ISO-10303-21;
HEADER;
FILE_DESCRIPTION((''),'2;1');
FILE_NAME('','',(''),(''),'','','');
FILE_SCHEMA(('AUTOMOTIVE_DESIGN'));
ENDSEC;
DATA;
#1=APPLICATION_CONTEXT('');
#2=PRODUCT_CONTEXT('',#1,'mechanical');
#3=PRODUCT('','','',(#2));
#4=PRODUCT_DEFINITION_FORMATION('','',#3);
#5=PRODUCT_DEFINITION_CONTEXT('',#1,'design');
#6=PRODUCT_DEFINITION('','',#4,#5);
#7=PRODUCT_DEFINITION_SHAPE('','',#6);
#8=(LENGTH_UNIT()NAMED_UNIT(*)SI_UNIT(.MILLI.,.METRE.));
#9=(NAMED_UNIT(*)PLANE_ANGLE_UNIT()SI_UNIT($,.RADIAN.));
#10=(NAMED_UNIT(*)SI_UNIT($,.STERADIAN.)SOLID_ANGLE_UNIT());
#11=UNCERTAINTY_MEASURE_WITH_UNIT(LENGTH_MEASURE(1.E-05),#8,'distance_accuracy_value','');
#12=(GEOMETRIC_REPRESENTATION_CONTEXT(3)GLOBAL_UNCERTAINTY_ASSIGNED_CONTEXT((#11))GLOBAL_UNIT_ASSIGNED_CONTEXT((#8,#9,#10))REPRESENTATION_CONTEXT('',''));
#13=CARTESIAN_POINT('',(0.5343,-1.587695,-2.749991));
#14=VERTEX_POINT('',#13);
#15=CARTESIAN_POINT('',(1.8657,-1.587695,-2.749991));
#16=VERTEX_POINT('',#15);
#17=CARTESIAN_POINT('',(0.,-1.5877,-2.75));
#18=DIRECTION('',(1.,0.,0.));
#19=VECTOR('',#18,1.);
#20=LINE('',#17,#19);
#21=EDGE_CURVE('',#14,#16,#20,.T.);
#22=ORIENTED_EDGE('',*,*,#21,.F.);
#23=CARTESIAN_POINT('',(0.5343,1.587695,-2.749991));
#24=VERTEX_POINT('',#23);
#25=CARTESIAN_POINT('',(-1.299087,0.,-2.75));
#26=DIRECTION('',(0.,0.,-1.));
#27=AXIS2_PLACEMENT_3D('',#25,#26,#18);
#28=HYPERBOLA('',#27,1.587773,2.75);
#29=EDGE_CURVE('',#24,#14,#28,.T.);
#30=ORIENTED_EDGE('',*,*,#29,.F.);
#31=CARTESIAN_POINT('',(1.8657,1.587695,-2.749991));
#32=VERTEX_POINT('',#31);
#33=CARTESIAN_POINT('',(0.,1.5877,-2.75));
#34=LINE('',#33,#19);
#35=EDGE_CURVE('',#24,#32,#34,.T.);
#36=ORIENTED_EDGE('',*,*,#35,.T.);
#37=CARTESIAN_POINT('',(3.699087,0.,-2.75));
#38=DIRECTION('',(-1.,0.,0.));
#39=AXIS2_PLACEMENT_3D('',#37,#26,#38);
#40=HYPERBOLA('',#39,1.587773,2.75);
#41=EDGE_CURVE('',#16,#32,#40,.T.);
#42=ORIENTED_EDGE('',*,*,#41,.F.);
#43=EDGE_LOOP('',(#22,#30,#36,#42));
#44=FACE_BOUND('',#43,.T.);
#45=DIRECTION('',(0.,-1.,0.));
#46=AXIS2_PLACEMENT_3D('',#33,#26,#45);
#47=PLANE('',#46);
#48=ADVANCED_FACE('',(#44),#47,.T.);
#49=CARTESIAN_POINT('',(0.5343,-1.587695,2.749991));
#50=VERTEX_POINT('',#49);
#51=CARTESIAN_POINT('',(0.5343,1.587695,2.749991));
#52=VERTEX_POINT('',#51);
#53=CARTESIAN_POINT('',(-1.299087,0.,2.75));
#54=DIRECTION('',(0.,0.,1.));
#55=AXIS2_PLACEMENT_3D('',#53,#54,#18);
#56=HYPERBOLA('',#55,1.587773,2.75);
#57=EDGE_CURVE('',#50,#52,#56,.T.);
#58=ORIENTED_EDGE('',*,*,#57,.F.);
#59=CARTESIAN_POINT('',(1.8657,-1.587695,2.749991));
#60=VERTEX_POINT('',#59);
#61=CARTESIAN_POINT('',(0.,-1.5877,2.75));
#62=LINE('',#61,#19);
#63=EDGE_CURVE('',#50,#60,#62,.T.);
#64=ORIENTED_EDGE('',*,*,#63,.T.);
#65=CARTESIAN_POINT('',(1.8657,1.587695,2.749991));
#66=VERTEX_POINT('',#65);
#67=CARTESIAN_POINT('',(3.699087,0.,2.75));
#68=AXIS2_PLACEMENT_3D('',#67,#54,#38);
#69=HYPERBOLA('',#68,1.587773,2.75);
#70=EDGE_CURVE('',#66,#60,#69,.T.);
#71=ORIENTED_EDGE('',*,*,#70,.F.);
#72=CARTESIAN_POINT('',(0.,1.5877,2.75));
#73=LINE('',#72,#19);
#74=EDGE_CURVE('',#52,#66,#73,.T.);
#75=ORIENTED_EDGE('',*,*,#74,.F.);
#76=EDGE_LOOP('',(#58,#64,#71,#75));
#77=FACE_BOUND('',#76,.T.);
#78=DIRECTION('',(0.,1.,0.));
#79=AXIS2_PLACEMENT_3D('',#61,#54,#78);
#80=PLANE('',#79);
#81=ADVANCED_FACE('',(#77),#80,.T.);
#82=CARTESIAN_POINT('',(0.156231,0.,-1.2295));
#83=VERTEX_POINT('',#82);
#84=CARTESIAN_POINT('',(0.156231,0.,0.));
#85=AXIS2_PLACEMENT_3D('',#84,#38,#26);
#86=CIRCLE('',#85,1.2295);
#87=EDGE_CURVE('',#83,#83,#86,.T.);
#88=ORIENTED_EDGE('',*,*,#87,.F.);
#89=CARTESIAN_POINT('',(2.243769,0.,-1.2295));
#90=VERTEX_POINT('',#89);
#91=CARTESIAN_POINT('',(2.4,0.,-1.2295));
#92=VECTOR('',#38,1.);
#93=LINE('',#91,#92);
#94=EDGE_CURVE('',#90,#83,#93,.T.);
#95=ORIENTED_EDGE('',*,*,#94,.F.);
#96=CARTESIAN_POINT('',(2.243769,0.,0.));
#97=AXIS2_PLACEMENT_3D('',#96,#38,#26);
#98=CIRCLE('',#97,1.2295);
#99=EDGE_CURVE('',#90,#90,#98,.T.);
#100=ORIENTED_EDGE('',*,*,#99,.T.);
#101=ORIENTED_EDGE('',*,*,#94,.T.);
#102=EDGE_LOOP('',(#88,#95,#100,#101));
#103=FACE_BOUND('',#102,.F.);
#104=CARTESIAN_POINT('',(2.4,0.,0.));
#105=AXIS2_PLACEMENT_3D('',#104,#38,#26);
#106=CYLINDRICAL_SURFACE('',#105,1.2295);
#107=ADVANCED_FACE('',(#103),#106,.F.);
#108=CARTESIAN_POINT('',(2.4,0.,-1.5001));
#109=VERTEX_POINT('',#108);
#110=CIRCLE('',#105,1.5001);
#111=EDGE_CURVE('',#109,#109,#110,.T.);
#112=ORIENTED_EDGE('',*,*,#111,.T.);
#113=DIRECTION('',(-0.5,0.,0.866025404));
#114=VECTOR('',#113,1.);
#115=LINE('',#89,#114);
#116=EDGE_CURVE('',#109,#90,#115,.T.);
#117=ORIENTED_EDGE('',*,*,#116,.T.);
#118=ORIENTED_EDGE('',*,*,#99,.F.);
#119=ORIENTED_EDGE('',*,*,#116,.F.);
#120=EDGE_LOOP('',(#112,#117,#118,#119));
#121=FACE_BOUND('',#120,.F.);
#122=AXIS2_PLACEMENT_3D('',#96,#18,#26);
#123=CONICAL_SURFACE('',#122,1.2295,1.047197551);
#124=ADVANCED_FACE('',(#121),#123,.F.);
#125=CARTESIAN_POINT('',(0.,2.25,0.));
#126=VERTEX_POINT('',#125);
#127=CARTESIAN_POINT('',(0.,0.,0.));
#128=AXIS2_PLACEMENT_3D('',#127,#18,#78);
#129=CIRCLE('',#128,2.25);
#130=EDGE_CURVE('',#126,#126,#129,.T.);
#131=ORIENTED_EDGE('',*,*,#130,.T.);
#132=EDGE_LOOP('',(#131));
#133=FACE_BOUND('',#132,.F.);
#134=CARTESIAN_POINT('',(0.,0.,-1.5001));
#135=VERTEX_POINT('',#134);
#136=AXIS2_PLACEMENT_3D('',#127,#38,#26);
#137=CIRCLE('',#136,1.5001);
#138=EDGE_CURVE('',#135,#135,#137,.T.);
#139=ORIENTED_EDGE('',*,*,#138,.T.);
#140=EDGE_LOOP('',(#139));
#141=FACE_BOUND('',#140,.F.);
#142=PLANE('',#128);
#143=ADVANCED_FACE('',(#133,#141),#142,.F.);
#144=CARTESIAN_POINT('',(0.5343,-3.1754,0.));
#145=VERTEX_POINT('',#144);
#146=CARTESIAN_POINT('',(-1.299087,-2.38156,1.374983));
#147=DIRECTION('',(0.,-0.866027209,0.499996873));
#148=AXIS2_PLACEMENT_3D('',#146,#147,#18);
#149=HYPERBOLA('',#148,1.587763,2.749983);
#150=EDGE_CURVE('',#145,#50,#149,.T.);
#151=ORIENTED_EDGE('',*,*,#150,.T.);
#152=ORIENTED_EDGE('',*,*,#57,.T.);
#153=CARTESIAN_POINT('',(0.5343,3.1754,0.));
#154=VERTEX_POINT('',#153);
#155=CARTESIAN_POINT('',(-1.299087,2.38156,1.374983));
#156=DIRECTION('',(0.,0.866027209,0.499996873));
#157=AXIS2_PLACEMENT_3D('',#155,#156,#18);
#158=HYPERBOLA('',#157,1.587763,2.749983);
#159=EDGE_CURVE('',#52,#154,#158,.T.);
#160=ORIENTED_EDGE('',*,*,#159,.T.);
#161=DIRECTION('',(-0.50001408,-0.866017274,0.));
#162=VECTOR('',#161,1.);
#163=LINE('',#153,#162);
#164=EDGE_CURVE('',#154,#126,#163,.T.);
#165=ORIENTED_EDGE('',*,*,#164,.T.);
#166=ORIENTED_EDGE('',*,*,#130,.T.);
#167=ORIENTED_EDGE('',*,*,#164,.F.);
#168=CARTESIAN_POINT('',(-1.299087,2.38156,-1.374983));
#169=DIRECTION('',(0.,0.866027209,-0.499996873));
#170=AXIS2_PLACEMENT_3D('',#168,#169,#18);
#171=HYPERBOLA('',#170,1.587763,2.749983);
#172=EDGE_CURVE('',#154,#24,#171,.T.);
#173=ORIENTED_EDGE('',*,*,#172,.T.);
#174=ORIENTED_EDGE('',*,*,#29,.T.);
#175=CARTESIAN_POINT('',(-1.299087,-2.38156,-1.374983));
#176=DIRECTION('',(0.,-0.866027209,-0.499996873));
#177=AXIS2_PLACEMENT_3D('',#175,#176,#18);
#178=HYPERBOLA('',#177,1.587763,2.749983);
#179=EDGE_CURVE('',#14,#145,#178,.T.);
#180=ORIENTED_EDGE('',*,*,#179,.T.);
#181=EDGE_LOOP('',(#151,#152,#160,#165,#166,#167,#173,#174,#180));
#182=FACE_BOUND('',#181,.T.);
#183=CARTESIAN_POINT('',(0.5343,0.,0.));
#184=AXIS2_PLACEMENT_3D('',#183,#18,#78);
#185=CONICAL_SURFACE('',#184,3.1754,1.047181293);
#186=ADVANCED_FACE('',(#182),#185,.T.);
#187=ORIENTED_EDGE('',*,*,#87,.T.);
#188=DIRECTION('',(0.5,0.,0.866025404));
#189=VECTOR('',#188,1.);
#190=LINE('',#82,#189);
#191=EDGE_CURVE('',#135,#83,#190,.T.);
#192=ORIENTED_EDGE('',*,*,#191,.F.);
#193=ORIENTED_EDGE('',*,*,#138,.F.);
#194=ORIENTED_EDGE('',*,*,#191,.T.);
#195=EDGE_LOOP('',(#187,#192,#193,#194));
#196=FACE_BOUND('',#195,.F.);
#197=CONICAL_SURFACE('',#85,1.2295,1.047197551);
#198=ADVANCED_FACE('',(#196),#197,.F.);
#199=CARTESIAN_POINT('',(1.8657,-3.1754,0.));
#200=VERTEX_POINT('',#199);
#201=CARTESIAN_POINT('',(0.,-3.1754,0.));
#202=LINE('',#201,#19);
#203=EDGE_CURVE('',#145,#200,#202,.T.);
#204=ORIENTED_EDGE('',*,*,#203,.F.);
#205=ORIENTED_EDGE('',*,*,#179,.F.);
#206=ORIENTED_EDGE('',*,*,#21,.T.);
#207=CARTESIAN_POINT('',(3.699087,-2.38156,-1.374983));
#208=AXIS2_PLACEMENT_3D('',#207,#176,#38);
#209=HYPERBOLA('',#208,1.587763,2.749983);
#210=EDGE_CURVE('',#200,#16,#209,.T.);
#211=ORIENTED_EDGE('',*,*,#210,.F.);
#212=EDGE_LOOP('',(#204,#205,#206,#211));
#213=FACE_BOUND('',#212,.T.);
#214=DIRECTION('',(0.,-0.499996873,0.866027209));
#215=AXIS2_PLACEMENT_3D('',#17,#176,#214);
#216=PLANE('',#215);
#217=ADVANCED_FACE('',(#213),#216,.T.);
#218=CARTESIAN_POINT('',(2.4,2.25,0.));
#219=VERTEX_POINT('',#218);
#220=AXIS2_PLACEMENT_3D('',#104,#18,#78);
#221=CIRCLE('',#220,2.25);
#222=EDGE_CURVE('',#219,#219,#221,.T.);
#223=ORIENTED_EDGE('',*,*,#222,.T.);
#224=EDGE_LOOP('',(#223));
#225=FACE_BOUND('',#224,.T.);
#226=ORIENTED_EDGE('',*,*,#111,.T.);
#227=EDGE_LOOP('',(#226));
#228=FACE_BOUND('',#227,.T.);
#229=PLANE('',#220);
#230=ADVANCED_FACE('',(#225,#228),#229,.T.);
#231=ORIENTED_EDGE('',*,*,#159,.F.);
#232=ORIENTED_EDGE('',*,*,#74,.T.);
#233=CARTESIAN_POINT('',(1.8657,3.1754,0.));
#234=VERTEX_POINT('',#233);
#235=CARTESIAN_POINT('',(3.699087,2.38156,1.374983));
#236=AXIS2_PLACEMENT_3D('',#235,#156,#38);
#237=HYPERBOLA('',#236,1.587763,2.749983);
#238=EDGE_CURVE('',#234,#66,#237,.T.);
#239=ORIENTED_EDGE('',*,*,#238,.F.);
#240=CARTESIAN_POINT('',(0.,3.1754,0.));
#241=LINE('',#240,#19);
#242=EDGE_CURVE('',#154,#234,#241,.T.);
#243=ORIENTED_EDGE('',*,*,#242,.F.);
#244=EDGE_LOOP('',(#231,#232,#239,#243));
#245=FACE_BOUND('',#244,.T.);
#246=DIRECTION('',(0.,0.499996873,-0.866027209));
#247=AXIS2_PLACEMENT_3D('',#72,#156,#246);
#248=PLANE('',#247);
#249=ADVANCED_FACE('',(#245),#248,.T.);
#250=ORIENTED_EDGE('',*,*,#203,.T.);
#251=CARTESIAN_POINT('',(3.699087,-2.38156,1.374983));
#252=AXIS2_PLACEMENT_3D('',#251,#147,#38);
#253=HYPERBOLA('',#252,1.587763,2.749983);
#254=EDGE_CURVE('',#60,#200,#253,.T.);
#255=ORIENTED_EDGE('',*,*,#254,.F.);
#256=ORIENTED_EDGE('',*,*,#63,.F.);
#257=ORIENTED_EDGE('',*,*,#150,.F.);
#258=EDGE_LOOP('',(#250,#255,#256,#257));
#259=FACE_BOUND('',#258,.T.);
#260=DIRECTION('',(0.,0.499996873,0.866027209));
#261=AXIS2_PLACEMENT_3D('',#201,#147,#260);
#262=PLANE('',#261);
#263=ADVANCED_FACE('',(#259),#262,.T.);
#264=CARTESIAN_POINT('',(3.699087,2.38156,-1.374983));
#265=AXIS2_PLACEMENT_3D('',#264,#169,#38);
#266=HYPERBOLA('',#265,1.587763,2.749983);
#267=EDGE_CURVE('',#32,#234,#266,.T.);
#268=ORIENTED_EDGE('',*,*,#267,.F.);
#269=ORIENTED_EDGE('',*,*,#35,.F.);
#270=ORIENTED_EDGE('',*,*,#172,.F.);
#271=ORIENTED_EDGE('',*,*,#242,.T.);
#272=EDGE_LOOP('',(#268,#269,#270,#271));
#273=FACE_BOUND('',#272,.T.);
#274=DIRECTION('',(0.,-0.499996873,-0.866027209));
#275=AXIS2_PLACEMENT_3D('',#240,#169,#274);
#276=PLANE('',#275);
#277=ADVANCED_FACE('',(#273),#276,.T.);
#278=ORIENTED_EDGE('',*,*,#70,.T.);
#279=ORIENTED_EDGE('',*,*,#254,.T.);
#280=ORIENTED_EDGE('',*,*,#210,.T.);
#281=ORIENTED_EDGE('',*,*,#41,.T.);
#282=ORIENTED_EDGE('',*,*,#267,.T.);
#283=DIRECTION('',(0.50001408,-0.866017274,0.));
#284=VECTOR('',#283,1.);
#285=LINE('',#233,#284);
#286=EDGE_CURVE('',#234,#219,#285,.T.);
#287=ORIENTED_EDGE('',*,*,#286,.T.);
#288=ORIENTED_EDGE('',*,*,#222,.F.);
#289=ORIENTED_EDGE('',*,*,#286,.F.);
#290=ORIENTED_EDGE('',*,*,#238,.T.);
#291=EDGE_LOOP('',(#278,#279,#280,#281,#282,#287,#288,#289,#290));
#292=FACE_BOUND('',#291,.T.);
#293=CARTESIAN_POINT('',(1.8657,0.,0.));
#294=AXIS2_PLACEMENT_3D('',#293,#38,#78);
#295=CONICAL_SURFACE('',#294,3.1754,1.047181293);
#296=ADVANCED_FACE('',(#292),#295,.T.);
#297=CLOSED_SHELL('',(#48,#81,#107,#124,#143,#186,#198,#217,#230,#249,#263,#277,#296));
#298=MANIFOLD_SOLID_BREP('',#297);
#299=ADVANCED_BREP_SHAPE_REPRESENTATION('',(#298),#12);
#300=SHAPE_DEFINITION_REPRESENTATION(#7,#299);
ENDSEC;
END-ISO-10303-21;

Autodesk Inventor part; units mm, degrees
ref_plane "YZ Plane" through (0, 0, 0) normal (1, 0, 0) x (0, 1, 0)
ref_plane "XZ Plane" through (0, 0, 0) normal (0, 1, 0) x (-1, 0, 0)
sketch "Sketch1" plane through (0, 0, 0) normal (1, 0, 0) x (0, 1, 0)
  line L0 (-3.1754, 0) -> (-1.5877, 2.75)
  line L1 (-1.5877, 2.75) -> (1.5877, 2.75)
  line L2 (1.5877, 2.75) -> (3.1754, 0)
  line L3 (3.1754, 0) -> (1.5877, -2.75)
  line L4 (1.5877, -2.75) -> (-1.5877, -2.75)
  line L5 (-1.5877, -2.75) -> (-3.1754, 0)
  point P0 (0, 0)
  point P1 (0, 0)
  dimension "d0" = 6.3509
extrude "Body" add sketch "Sketch1" along normal blind 2.4
sketch "Sketch2" plane through (0, 0, 0) normal (0, 0, 1) x (1, 0, 0)
  line L0 (0, 1.5877) -> (0, 3.1754) projected
  line L1 (0, 3.1754) -> (2.4, 3.1754) projected
  line L2 (2.4, 1.5877) -> (2.4, 3.1754) projected
  line L3 (-0.48, 0) -> (2.88, 0) projected
  line L4 (0.5343, 3.1754) -> (0, 2.25)
  line L5 (1.8657, 3.1754) -> (2.4, 2.25)
  dimension "d3" = 30
  dimension "d4" = 30
  dimension "d5" = 4.5
  dimension "d6" = 4.5
revolve "Chamfer1" cut sketch "Sketch2" angle 360 about axis through (-10, 0, 0) along (1, 0, 0)
sketch "Sketch3" plane through (2.4, 0, 0) normal (1, 0, 0) x (0, 0, -1)
  arc A0 (-0.625, -1.0825) -> (0.625, -1.0825) centre (0, 0) ccw projected
hole "Thread" at (2.4, 0, 0) direction (-1, 0, 0) diameter 2.459 end through all thread size "M3x0.5" class "6H" standard "ISO Metric profile"
chamfer "Chamfer2" distance 0.2706 angle 30 1 edges at (2.4, 0, 1.2295) measured on face at (2.4, 1.8851, -0.2289)
chamfer "Chamfer3" distance 0.2706 angle 30 1 edges at (0, 0, 1.2295) measured on face at (0, 1.8851, -0.2289)
ref_plane "Work Plane1" through (-6.3375, 0, 0) normal (0, -0.8660254, -0.5) x (1, 0, 0)
equation "\"d0\" = 1.1547 * SW"
equation "\"d1\" = KOH"
equation "\"d3\" = ANG1"
equation "\"d4\" = ANG2"
equation "\"d5\" = SW0"
equation "\"d6\" = SW01"
equation "\"d8\" = -0.5 * GD1 + 0.5 * NND"
equation "\"d40\" = -0.5 * GD1 + 0.5 * NND"
equation "\"d10\" = -0.5 * GD1 + 0.5 * NND"
equation "\"d41\" = -0.5 * GD1 + 0.5 * NND"
equation "\"ANG1\" = 30deg"
equation "\"ANG2\" = 30deg"
equation "\"NND\" = 3"
equation "\"KOH\" = 2.4"
equation "\"SW\" = 5.5"
equation "\"SW0\" = SW01"
equation "\"SW01\" = 4.5"
equation "\"GUL\" = 0.541266 * PTC"
equation "\"THREADDIA\" = 3"
equation "\"TOA\" = 30deg"
equation "\"PTC\" = 0.5"
equation "\"E0\" = 1.155 * SW"
equation "\"GAL\" = 0.541266 * PTC"
equation "\"GD1\" = 2.458734"
properties part number "DIN 934 - M3" material "Steel, Mild"
